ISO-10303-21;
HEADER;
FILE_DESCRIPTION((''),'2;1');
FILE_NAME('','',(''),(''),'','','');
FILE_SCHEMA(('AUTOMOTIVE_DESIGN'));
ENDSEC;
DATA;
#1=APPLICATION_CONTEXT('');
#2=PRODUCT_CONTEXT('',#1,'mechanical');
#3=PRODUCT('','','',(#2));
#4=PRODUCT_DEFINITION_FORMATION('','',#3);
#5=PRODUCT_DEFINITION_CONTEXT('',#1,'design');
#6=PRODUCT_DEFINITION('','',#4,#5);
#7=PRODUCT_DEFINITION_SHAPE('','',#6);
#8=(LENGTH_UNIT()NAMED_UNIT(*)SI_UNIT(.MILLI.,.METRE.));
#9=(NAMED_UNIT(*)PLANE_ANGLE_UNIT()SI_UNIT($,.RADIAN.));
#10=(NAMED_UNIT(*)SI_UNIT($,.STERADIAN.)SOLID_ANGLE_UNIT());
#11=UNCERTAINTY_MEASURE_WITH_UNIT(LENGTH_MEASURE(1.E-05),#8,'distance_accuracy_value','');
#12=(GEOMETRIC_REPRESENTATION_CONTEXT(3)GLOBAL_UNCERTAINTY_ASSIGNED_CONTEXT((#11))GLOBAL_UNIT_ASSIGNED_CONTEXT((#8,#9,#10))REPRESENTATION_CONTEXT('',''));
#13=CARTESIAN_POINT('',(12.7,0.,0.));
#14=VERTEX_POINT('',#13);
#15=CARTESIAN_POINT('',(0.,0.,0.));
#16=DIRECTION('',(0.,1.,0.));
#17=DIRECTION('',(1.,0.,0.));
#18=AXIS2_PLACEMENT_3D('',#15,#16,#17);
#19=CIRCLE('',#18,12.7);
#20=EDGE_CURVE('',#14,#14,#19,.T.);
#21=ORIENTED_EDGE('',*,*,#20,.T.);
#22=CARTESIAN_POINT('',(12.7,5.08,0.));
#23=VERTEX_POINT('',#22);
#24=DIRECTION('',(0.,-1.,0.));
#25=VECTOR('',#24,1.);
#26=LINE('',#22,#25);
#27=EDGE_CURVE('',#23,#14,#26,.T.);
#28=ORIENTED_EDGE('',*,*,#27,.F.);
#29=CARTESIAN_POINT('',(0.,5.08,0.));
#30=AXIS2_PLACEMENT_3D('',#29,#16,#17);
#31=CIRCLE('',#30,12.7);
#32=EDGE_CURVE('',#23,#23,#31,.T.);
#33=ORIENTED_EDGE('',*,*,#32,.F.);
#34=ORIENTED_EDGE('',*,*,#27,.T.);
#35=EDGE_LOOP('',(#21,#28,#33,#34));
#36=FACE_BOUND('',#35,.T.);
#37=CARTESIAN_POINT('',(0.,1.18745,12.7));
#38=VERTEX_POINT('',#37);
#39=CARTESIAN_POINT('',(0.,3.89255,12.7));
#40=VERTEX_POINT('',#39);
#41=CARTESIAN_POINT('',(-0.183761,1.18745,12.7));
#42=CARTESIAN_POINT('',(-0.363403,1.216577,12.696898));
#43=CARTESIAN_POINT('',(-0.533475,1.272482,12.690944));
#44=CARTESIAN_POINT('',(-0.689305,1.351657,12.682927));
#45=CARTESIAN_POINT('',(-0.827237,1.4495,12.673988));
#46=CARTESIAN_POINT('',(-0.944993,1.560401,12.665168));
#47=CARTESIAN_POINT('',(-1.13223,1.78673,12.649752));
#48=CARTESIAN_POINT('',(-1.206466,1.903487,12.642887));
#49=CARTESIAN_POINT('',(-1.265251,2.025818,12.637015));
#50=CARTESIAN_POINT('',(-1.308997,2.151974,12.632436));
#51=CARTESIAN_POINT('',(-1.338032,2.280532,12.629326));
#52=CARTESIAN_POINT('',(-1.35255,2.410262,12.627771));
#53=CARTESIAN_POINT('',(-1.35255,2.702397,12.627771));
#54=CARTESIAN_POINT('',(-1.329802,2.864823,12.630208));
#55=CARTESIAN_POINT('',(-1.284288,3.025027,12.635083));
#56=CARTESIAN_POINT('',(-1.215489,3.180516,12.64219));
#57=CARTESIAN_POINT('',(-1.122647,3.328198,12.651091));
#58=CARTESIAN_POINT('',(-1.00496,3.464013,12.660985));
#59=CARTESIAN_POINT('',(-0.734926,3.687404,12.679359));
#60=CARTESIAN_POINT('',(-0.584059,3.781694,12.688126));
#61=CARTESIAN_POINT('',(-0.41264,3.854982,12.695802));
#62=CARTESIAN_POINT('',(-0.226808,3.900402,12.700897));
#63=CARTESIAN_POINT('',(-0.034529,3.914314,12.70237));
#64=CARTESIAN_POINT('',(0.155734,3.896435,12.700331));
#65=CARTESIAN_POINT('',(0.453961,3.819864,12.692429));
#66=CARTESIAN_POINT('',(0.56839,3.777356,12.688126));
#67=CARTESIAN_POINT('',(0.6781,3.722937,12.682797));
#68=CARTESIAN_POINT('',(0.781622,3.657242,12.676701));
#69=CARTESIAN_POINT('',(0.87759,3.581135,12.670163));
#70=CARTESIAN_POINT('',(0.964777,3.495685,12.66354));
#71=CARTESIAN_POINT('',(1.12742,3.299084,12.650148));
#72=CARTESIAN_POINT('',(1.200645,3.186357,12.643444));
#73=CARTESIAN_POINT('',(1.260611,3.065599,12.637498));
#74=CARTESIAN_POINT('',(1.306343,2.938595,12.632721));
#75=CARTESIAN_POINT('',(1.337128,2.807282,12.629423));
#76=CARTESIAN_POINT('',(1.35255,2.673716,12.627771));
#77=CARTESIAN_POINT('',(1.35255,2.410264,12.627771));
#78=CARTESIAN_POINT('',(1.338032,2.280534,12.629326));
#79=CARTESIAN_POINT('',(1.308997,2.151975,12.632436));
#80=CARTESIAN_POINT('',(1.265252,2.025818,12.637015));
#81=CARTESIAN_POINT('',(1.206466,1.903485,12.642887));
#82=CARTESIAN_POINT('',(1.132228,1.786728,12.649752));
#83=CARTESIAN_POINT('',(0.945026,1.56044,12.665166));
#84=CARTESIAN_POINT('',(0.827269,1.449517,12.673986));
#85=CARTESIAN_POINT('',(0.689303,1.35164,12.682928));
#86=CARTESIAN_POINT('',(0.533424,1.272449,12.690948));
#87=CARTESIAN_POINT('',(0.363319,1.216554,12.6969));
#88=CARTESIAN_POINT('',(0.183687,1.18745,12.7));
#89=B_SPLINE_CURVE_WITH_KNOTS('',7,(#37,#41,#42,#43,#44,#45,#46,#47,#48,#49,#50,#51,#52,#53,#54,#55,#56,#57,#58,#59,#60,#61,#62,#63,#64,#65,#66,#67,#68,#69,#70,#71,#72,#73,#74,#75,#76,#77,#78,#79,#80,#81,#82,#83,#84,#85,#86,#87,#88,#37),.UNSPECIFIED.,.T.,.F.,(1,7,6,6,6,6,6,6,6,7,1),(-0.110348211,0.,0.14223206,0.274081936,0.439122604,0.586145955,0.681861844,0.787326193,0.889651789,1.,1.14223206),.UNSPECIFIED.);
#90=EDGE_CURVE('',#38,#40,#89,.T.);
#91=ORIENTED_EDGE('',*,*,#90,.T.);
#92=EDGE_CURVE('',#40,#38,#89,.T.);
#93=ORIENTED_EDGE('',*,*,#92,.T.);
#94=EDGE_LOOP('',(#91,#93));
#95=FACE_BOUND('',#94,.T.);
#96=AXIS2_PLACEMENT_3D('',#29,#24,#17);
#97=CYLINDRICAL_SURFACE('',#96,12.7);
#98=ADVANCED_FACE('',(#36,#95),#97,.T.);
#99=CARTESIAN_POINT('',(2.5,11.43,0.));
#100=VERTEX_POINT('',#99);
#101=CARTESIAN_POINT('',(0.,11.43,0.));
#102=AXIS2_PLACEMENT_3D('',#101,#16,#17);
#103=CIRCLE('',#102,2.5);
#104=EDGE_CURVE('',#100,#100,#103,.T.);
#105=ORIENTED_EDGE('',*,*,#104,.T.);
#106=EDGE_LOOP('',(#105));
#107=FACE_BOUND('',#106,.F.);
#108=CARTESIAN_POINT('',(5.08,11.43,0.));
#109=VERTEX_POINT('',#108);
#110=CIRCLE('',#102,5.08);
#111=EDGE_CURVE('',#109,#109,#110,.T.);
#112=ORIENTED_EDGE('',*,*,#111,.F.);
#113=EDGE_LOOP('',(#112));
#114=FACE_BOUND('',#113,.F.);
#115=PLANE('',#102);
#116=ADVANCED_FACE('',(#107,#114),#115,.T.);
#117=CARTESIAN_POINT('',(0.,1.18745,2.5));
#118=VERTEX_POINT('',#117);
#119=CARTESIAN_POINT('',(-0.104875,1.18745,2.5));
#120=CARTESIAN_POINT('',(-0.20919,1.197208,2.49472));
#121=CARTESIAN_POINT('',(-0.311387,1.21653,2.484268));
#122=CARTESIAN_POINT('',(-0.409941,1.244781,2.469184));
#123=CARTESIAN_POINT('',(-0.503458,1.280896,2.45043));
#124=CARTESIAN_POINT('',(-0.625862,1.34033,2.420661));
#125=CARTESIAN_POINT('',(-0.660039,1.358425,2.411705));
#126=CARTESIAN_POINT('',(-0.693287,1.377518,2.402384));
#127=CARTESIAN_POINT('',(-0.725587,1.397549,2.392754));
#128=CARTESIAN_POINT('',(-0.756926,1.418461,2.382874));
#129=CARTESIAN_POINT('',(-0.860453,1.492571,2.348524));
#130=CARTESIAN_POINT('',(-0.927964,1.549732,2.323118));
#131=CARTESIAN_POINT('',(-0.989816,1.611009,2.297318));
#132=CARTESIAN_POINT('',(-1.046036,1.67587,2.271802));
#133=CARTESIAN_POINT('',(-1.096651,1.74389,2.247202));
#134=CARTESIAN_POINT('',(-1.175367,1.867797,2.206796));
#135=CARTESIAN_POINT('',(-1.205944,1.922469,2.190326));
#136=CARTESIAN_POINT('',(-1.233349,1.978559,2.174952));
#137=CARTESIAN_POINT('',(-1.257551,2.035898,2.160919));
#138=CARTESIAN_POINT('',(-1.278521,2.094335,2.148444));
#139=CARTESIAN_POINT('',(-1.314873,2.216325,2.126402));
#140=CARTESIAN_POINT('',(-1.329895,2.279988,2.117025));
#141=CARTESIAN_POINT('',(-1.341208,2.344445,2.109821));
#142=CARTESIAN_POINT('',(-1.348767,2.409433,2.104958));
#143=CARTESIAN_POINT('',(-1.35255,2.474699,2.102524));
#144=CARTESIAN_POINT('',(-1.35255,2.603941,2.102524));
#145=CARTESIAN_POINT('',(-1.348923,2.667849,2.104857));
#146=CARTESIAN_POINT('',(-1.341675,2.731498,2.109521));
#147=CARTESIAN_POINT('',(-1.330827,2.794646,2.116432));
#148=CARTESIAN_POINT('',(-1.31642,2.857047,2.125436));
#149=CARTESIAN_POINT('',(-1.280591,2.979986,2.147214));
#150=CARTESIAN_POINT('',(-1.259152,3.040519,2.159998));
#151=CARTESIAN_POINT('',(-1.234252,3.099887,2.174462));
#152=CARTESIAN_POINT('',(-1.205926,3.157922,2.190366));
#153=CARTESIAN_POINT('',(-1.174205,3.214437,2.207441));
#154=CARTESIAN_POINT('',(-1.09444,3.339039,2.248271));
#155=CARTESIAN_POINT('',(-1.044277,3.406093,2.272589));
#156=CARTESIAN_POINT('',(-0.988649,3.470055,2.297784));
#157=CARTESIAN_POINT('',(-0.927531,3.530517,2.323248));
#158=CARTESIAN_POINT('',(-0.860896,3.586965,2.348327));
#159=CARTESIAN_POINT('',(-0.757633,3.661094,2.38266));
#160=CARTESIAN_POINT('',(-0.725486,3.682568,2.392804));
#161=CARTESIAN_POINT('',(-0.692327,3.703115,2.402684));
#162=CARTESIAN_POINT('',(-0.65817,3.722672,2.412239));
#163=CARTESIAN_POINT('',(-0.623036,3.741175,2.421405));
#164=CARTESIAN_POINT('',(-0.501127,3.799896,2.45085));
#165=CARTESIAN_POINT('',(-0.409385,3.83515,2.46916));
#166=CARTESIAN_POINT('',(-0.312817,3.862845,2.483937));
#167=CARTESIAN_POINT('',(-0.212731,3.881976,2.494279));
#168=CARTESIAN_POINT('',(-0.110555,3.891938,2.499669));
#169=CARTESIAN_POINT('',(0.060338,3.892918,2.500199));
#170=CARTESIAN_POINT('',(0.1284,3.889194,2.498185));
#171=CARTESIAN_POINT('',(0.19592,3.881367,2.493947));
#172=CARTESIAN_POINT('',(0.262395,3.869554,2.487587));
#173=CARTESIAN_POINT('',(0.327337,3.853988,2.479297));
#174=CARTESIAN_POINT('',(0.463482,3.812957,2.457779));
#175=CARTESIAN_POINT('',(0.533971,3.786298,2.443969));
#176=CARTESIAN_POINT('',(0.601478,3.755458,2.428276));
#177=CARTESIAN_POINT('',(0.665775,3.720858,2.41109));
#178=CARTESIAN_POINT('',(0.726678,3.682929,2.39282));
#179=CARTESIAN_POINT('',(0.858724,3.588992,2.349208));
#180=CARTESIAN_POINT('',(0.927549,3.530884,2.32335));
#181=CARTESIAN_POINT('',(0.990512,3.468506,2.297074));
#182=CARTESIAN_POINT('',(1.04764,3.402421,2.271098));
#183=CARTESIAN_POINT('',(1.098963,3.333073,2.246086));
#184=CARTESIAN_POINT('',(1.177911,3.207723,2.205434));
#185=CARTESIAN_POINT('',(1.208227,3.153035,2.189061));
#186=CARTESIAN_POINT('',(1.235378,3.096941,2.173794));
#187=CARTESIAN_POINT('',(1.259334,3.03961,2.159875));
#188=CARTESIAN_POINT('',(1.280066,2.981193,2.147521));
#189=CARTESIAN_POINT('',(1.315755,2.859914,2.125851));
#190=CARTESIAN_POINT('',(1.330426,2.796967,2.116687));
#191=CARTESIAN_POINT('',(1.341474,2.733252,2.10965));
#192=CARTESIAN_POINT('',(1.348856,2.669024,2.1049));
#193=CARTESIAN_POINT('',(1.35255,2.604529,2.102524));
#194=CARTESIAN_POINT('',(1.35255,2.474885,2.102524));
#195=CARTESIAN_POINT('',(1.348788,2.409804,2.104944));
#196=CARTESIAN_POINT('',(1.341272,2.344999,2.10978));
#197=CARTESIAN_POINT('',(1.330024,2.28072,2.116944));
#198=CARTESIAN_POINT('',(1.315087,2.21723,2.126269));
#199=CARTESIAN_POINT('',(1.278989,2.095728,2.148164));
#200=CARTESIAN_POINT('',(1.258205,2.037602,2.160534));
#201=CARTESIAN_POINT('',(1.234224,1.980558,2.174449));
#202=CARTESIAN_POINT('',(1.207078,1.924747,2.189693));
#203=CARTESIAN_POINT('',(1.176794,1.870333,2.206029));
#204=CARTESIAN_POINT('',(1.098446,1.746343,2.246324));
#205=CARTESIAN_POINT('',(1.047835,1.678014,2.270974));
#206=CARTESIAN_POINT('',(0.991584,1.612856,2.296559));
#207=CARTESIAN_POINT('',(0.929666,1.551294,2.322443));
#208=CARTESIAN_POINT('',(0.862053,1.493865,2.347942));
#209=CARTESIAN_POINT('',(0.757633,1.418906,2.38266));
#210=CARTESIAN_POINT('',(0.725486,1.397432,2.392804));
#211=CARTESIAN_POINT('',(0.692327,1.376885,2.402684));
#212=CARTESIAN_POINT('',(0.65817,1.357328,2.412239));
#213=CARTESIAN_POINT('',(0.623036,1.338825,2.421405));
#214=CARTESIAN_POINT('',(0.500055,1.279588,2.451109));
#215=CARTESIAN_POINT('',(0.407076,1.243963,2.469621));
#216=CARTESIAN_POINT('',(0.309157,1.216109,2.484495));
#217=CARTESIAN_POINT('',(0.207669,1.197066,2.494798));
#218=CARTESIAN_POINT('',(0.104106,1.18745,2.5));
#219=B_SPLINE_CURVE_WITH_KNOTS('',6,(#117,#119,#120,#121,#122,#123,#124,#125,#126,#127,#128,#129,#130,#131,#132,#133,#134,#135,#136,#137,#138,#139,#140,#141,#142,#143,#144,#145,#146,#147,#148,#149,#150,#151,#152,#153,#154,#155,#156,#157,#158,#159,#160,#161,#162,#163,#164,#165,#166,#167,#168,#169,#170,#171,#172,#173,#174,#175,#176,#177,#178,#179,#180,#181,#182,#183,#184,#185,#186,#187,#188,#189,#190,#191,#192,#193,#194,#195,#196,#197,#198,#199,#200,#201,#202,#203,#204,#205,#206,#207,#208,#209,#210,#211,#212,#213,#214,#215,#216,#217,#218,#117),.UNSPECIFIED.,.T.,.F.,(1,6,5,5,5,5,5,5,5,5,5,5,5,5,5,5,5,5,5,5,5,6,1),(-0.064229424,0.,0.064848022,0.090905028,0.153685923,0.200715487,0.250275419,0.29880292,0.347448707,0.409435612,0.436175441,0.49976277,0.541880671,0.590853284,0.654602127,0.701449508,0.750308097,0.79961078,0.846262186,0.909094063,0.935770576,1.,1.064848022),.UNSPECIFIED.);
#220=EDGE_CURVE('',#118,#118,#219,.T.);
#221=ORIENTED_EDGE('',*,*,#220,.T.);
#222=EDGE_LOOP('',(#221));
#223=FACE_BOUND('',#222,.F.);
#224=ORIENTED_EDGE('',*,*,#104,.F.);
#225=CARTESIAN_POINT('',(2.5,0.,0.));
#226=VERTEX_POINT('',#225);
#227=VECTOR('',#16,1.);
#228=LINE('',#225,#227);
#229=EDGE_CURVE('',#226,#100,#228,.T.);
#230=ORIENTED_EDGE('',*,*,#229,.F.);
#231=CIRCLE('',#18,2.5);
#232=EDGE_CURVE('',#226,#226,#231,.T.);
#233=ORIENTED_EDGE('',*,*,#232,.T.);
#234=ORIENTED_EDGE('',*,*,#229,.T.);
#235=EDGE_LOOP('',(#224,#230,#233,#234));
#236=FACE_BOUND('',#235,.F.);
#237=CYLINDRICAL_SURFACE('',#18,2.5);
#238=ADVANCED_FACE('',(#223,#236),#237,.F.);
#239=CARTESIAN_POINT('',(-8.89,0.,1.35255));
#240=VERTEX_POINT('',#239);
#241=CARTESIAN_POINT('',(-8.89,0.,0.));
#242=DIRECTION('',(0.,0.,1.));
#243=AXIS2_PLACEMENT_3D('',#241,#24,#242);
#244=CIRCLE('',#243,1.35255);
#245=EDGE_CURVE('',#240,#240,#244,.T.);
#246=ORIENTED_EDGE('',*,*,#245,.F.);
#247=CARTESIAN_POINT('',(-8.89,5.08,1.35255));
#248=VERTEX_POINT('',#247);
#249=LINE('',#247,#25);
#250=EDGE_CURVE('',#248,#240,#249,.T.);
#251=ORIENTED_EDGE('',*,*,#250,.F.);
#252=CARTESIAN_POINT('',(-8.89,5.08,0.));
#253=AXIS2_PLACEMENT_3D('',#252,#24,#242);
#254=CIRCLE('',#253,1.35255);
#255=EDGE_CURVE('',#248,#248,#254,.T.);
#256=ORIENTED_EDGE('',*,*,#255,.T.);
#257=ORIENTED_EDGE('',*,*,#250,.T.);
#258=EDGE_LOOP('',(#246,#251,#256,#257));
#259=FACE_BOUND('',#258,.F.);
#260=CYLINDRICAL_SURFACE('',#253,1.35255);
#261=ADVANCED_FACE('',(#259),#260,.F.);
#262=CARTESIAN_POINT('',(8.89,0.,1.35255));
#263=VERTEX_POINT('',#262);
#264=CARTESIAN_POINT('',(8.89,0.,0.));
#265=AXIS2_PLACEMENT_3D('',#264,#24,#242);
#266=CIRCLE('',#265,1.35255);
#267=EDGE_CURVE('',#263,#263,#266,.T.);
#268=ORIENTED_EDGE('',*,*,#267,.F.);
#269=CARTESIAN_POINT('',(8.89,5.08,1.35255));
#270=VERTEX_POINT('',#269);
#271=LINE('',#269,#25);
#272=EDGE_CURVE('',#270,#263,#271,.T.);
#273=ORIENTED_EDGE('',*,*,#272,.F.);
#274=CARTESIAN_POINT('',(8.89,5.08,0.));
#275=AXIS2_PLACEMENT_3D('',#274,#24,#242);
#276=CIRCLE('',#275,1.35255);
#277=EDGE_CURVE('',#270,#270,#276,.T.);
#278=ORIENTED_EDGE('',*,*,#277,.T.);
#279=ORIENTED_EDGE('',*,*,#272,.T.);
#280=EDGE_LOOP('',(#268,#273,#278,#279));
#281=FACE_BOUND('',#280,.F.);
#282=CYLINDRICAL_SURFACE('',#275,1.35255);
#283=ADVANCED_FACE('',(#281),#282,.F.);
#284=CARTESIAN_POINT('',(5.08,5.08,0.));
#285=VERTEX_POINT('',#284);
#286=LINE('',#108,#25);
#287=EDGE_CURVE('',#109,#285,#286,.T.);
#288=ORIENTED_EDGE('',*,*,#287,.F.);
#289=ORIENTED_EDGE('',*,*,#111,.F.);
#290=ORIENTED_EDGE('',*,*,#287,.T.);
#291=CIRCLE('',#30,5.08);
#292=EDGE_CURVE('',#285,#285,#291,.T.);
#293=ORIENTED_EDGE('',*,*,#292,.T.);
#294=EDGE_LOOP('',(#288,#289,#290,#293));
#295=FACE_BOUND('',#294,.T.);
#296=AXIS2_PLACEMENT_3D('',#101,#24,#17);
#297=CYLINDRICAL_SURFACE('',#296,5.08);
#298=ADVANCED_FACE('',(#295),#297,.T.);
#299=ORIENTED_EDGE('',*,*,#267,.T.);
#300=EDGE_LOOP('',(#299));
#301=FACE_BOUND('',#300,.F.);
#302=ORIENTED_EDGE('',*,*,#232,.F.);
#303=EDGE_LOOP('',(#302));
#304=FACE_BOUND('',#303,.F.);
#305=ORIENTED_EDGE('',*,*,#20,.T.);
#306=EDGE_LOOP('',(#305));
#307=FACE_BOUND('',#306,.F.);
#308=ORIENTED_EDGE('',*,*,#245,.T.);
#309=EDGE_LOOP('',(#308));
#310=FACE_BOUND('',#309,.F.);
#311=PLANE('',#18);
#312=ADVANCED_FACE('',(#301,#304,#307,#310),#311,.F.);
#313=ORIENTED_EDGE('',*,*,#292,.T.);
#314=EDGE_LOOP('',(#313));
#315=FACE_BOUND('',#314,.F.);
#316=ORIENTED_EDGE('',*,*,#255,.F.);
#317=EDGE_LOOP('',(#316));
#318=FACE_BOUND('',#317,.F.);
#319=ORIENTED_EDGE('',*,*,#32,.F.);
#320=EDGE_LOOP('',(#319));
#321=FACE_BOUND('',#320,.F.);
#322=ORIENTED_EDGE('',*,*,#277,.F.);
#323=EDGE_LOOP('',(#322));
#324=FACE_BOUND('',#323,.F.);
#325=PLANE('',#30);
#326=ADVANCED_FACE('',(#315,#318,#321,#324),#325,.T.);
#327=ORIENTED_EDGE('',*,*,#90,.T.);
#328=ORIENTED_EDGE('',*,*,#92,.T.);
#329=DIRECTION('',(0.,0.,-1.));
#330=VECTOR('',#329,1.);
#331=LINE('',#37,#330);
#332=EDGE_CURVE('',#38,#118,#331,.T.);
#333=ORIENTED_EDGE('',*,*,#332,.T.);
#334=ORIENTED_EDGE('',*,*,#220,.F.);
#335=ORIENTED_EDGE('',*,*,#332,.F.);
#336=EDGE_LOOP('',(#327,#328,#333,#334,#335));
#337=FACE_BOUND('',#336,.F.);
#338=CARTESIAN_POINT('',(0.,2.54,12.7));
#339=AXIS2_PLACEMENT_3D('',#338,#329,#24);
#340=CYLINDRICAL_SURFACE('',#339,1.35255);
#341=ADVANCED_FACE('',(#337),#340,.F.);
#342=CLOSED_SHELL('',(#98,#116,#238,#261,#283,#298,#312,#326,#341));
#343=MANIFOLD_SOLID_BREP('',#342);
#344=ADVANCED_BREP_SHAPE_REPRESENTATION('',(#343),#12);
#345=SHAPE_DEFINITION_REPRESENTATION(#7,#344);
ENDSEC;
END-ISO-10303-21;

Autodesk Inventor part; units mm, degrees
ref_plane "YZ Plane" through (0, 0, 0) normal (1, 0, 0) x (0, 1, 0)
ref_plane "XZ Plane" through (0, 0, 0) normal (0, 1, 0) x (-1, 0, 0)
sketch "Sketch1" plane through (0, 0, 0) normal (0, 0, 1) x (1, 0, 0)
  line L0 (2.5, 11.43) -> (5.08, 11.43)
  line L1 (5.08, 11.43) -> (5.08, 5.08)
  line L2 (5.08, 5.08) -> (12.7, 5.08)
  line L3 (12.7, 5.08) -> (12.7, 0)
  line L4 (12.7, 0) -> (2.5, 0)
  line L5 (2.5, 0) -> (2.5, 11.43)
  line L6 (0, -2.286) -> (0, 13.716) projected
  point P0 (0, 0)
  dimension "d0" = 2.5
  dimension "d1" = 12.7
  dimension "d2" = 5.08
  dimension "d3" = 5.08
  dimension "d4" = 6.35
revolve "Revolution1" add sketch "Sketch1" angle 360 about axis through (0, -10, 0) along (0, 1, 0)
sketch "Sketch2" plane through (0, 5.08, 0) normal (0, 1, 0) x (1, 0, 0)
  circle A0 centre (0, 0) radius 12.7 projected
  line L0 (-8.89, 0) -> (8.89, 0) construction
  dimension "d6" = 17.78
hole "Hole1" at (-8.89, 5.08, 0) at (8.89, 5.08, 0) direction (0, -1, 0) diameter 2.7051 end through all
ref_plane "Work Plane1" through (0, 2.54, 12.7) normal (0, 0, 1) x (1, 0, 0)
sketch "Sketch3" plane through (0, 2.54, 12.7) normal (0, 0, 1) x (1, 0, 0)
  point P0 (0, -2.54)
  point P1 (0, 0)
  dimension "d17" = 2.54
  dimension "d18" = 0
hole "Hole2" at (0, 2.54, 12.7) direction (0, 0, -1) diameter 2.7051 end up to surface
properties part number "carousel_hub"
